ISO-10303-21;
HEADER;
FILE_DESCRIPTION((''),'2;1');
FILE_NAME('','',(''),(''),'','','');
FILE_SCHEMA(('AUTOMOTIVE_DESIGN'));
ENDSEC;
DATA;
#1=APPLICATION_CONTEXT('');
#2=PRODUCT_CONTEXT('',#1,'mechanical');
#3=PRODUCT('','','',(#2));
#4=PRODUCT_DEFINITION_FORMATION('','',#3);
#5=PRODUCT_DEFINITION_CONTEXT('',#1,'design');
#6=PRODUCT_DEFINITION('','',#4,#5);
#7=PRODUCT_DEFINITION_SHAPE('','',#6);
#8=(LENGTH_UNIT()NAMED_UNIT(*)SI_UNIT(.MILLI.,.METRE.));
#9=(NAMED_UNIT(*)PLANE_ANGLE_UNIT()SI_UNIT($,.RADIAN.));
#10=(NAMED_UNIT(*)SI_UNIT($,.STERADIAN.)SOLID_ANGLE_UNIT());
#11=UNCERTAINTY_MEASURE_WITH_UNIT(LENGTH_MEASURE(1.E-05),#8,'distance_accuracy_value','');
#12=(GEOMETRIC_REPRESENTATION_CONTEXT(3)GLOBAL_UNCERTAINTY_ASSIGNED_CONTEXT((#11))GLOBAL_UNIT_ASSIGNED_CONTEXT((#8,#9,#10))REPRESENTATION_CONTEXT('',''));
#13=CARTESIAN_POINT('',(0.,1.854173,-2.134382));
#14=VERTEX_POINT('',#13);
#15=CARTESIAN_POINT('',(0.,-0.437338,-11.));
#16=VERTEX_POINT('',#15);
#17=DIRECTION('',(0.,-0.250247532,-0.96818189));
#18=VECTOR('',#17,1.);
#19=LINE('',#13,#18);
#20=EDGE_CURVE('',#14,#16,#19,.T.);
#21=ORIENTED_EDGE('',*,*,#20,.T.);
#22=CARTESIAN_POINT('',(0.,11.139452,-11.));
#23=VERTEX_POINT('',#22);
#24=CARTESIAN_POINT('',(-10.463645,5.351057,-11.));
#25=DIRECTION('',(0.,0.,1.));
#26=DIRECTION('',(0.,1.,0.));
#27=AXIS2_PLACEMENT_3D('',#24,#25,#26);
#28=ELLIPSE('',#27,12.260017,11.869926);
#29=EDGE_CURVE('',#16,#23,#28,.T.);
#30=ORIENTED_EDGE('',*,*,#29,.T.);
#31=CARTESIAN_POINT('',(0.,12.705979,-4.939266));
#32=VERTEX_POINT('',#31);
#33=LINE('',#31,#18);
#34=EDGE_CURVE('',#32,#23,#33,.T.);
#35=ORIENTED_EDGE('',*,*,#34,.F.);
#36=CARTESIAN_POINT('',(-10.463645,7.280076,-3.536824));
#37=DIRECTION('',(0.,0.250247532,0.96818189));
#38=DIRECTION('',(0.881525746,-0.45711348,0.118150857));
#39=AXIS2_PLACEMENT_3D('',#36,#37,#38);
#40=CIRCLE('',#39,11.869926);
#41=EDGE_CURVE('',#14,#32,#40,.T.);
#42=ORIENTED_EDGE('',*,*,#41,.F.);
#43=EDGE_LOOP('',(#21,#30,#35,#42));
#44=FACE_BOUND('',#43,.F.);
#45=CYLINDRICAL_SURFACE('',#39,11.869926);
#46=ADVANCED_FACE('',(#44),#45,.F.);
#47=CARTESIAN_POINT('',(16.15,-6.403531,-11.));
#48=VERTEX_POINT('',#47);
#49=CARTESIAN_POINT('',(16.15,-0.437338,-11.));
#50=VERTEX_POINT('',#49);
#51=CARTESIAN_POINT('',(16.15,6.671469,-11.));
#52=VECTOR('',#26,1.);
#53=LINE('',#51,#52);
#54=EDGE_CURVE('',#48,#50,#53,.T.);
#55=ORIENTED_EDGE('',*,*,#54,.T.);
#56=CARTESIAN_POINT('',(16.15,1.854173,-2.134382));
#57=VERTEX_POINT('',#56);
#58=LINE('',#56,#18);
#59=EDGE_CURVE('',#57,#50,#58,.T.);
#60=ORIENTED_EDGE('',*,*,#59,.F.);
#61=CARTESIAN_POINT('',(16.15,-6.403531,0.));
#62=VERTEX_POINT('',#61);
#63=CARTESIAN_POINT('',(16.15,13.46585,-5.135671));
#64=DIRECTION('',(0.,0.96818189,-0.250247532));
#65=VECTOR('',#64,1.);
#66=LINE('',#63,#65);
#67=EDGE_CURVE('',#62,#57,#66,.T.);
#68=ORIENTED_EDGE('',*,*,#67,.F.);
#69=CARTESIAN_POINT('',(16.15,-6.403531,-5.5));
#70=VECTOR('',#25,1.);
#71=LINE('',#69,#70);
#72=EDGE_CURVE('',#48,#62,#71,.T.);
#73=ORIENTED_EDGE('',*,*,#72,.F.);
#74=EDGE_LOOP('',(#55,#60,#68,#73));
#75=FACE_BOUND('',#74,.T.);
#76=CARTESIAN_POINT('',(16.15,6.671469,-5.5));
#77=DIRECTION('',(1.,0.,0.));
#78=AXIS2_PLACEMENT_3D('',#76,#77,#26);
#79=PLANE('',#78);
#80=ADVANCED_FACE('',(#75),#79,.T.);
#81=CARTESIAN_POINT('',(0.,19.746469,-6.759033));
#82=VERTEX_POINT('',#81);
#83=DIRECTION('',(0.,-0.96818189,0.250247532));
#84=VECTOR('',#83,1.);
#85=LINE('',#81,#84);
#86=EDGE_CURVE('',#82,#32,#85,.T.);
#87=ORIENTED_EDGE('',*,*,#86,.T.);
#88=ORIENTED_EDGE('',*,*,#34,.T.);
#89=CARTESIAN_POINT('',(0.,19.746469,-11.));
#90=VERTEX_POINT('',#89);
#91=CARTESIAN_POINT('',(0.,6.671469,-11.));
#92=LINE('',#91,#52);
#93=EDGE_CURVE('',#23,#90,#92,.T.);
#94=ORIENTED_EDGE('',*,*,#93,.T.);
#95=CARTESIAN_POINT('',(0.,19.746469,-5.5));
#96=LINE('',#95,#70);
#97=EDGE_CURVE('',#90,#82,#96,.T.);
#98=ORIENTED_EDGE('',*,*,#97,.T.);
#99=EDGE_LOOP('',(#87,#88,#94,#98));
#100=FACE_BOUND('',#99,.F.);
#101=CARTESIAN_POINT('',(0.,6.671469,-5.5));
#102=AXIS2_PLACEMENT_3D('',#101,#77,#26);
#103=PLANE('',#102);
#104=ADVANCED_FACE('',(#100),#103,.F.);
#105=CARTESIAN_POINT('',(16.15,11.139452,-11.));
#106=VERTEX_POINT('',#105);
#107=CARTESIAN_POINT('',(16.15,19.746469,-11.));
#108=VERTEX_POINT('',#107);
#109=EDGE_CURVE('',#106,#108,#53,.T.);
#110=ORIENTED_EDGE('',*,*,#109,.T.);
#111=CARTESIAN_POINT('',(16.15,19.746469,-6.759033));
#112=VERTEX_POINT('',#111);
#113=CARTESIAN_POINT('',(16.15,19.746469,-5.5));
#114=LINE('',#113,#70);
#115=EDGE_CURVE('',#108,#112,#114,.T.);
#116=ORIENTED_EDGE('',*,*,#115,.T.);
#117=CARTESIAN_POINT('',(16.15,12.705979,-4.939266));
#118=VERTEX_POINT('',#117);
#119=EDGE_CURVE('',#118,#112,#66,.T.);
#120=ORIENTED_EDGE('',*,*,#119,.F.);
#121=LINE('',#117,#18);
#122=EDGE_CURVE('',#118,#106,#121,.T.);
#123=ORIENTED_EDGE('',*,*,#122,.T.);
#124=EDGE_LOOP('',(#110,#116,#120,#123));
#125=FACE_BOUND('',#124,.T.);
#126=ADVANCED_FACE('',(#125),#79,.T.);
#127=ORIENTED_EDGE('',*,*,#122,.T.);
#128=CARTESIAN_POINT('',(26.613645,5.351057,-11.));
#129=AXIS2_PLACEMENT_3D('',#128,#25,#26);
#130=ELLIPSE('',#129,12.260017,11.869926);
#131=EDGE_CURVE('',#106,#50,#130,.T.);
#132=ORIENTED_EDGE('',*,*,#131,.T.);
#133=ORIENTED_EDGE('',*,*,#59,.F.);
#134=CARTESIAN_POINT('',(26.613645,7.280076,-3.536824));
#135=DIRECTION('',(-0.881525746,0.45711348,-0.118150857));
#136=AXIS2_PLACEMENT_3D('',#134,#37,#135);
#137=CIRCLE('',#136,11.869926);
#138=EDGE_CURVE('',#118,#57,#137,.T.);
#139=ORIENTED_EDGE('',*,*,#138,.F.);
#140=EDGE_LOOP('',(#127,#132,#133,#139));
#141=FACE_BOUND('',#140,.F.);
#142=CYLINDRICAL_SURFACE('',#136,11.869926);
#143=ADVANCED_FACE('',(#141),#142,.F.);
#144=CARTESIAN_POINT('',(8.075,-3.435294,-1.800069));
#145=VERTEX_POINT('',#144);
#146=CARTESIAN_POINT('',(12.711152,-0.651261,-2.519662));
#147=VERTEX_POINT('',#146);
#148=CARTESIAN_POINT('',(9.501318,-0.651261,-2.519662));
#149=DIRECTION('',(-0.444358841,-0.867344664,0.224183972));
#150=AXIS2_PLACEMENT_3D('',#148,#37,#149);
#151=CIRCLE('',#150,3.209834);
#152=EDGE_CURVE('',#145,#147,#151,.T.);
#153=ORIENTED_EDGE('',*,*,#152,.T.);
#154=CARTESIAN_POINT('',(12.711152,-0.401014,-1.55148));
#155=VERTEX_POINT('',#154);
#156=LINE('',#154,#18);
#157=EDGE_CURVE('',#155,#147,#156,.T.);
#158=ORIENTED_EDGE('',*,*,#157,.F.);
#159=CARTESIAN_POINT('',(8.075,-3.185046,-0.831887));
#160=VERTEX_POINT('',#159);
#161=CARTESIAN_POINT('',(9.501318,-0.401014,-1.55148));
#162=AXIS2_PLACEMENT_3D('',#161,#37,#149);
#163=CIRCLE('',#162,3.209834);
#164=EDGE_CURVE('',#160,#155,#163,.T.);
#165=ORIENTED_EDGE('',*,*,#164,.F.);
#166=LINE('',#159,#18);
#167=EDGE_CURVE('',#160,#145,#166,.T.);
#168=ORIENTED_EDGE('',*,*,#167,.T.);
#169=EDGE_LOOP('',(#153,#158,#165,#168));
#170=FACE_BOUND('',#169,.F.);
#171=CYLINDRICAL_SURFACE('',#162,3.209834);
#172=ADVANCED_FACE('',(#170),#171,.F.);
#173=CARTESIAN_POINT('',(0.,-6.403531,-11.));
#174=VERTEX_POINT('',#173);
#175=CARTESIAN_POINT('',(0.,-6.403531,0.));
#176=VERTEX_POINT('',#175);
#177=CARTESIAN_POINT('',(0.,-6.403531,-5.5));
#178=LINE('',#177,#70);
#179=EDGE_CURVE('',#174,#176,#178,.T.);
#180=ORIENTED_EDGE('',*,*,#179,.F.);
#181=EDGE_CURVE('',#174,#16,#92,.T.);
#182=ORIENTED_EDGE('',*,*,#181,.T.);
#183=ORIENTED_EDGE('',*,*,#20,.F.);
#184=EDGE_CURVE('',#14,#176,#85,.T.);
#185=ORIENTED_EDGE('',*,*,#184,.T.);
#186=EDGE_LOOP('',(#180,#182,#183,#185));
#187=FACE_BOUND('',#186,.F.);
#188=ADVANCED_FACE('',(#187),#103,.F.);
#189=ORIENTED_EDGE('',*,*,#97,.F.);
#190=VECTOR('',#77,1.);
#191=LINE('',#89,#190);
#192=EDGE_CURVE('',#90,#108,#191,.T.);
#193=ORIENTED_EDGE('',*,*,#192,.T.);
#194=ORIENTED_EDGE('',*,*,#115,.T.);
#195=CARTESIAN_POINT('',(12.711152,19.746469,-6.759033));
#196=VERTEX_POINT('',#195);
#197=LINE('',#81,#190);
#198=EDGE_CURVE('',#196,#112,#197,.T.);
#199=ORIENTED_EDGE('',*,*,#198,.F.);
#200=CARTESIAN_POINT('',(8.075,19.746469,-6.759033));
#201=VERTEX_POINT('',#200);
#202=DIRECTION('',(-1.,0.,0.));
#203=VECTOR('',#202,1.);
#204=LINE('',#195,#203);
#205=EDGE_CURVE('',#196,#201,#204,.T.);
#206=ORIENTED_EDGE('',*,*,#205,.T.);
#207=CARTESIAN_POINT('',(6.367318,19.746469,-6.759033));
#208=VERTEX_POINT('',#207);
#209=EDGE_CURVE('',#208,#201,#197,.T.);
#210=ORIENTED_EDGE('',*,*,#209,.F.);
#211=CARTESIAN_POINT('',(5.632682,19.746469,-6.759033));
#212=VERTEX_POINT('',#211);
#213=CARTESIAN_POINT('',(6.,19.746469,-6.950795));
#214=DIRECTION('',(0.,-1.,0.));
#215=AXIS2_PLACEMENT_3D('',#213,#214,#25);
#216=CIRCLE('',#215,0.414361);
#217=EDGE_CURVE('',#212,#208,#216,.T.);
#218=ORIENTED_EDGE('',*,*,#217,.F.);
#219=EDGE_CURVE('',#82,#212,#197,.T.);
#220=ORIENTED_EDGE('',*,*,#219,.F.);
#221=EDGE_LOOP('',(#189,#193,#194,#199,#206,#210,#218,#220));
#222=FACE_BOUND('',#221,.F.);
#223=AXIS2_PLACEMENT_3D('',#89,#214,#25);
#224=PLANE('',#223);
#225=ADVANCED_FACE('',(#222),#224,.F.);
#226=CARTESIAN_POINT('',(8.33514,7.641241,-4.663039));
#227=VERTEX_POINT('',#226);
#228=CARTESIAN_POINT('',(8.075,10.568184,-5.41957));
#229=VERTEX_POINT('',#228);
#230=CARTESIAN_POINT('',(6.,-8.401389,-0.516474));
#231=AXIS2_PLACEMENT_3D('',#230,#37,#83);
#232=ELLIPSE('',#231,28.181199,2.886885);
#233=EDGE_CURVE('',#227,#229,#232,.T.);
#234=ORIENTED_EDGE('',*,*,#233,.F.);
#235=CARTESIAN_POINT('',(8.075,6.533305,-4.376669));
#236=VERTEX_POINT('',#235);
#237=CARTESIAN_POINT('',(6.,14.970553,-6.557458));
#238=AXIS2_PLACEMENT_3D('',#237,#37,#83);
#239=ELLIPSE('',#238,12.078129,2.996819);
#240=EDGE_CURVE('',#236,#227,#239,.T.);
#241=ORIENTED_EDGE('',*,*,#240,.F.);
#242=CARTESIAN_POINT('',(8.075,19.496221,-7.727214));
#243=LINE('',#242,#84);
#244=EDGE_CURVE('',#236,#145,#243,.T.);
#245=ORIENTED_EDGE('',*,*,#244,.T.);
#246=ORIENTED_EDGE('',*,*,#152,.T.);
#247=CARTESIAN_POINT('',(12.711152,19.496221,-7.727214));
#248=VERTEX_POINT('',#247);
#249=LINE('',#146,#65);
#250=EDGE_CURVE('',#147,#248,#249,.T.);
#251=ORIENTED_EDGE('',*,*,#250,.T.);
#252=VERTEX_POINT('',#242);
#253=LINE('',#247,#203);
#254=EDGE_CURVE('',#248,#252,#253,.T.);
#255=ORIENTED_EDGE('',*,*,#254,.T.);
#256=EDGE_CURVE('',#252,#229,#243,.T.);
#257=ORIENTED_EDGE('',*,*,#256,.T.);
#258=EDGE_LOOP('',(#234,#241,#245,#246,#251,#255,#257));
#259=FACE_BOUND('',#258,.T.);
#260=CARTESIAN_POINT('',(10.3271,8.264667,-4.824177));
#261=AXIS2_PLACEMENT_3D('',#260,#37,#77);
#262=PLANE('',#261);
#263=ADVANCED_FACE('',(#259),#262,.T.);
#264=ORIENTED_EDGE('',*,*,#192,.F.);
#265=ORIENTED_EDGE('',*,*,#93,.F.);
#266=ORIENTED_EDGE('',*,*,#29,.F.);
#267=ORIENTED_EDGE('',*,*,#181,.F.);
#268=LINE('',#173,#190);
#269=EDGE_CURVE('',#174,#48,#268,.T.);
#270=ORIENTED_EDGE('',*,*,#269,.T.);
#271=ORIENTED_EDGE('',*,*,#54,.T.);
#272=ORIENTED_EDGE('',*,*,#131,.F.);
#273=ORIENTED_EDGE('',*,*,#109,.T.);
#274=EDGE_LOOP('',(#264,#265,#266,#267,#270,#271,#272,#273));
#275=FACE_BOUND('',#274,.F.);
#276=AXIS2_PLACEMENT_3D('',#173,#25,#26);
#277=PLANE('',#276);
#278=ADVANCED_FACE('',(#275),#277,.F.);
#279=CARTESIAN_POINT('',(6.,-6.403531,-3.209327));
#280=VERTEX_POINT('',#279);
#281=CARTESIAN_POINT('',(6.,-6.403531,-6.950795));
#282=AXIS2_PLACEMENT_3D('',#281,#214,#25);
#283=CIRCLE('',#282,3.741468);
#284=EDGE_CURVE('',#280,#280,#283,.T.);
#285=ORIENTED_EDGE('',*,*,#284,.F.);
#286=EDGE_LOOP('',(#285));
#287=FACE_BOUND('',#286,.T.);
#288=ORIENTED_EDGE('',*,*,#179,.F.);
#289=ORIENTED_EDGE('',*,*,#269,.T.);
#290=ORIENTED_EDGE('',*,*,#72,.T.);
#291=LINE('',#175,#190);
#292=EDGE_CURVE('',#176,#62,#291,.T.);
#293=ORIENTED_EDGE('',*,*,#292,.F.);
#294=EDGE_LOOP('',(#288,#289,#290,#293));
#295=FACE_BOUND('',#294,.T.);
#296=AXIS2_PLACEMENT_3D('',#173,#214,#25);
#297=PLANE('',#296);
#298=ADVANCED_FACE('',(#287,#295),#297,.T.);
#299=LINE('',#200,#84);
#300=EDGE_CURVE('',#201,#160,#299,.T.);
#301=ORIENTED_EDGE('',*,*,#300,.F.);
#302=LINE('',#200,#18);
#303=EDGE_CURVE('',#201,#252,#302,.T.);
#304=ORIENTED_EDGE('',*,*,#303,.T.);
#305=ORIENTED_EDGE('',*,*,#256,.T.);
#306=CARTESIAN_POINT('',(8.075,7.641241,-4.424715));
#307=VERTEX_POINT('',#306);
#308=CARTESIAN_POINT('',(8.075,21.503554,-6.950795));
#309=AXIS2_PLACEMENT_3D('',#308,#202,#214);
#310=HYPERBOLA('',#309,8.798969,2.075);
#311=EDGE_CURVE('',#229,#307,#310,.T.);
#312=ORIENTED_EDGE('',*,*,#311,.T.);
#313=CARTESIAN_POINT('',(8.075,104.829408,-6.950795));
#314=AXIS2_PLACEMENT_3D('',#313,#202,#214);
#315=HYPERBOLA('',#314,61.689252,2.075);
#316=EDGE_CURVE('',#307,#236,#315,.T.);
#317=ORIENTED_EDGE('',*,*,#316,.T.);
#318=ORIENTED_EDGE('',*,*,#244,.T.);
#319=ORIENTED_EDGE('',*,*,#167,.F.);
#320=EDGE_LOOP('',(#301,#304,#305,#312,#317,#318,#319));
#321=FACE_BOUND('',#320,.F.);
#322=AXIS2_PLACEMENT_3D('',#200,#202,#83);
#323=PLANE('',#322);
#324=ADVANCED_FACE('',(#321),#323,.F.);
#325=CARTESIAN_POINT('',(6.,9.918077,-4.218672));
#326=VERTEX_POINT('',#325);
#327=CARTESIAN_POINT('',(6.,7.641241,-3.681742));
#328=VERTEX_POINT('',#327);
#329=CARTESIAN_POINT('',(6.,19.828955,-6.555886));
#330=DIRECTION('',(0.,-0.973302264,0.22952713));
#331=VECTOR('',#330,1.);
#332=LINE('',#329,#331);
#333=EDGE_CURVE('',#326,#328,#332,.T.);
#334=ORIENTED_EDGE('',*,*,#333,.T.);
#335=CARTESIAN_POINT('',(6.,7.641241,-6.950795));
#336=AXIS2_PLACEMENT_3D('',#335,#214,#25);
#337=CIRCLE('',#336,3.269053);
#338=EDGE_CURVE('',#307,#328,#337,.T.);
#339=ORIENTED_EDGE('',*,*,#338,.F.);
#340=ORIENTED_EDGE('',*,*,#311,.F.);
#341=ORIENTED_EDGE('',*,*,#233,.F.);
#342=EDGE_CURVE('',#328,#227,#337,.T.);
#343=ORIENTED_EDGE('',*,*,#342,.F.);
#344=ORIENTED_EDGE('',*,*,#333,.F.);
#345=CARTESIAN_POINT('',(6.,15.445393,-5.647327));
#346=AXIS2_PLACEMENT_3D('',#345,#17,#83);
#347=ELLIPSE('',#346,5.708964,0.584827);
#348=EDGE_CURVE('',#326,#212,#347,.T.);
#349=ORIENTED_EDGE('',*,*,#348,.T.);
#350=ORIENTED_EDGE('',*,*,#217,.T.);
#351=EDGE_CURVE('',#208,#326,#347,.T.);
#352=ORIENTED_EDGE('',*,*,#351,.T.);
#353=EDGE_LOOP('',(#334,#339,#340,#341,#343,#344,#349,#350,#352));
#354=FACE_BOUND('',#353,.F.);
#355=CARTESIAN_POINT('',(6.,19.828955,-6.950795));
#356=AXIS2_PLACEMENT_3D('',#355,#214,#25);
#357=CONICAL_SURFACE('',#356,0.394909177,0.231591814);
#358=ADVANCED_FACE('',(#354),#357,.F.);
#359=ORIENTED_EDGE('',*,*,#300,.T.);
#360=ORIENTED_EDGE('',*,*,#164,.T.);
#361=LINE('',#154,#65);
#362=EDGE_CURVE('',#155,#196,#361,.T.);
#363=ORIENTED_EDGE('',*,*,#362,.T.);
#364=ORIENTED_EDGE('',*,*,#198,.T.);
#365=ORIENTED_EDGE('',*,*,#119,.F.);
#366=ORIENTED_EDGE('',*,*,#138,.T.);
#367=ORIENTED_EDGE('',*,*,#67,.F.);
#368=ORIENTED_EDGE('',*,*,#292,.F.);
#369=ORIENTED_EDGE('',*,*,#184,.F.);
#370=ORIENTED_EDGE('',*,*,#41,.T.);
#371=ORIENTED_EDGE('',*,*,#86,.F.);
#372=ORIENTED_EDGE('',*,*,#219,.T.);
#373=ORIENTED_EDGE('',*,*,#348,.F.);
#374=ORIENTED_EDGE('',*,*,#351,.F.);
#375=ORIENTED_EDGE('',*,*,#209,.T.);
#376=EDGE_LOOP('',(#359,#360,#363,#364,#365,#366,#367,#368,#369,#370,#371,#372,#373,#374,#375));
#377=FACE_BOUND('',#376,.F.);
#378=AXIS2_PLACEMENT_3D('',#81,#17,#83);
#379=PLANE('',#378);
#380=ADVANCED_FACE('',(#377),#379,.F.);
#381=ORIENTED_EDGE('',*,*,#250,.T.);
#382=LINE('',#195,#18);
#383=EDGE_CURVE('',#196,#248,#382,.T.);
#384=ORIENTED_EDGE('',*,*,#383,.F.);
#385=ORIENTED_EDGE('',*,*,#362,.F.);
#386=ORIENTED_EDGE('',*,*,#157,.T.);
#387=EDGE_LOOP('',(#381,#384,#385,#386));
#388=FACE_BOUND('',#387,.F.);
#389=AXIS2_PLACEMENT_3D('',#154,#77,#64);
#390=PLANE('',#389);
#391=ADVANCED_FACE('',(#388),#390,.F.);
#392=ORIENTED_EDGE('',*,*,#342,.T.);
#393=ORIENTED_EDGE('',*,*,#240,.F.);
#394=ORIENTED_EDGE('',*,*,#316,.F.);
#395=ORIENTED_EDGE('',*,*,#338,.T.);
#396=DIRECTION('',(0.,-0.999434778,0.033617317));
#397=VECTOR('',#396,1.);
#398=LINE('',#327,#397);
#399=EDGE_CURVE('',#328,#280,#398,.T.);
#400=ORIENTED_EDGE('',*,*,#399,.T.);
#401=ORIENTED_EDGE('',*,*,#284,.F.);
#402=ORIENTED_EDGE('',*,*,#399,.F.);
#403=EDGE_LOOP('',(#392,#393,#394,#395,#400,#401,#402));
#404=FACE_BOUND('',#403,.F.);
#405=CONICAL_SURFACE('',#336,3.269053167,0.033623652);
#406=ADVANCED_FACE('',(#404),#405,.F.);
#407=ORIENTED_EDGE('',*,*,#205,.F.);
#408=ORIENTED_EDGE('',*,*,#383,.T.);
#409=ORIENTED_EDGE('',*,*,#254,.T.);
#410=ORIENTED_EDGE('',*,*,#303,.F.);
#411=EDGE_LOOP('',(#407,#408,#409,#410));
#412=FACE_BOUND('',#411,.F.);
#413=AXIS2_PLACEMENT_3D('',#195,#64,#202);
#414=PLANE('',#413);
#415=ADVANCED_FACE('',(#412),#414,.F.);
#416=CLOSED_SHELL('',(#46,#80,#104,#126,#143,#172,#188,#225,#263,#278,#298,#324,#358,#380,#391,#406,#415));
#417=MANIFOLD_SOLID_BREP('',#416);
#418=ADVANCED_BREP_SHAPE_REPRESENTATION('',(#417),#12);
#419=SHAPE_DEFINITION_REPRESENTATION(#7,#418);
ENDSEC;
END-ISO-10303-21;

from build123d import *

# Parameters (mm, degrees)
F0_W      = 26.15
F0_H      = 11
F1_DEPTH  = 16.15
F3_DEPTH  = 25
F5_DEPTH  = 1
F13_DEPTH = 10


# Not quite as in the source:
# - the program builds the solid bodies; features that only make, move or delete a surface that nothing else refers to are left out


with BuildPart() as f1:
    # F0 (on Right) → F1 (new body)
    with BuildSketch(Plane.YZ):
        with Locations((6.6714687273, -5.5)):
            Rectangle(F0_W, F0_H)
    extrude(amount=F1_DEPTH)

    # F2 (on face) → F3 (cut)
    with BuildSketch(Plane(origin=(0, 0, 0), x_dir=(0, -1, 0), z_dir=(-1, 0, 0))):
        Polygon((-19.7464687273, -6.7590326071), (6.4035312727, 0), (-19.7464687273, 0), align=None)
    extrude(amount=-F3_DEPTH, mode=Mode.SUBTRACT)

    # F4 (on face) → F5 (cut)
    with BuildSketch(Plane(origin=(0, -0.4010136369, -1.5514803987), x_dir=(1, 0, 0), z_dir=(0, 0.2502475322, 0.9681818903))):
        with BuildLine():
            Line((12.7111524343, 0), (12.7111524343, 20.8096046483))
            Line((12.7111524343, 20.8096046483), (8.075, 20.8096046483))
            Line((8.075, 20.8096046483), (8.075, -2.8755263988))
            ThreePointArc((8.075, -2.8755263988), (11.1931797197, -2.7277537217), (12.7111524343, 0))
        make_face()
    extrude(amount=-F5_DEPTH, mode=Mode.SUBTRACT)

    # F9 (on offset) → F10 (revolve, cut)
    with BuildSketch(Plane.YZ.offset(6)):
        Polygon((7.6412414201, -3.6817420176), (-6.7182444036, -3.1987416248), (-6.7182444036, -6.9507951848), (7.6412414201, -6.9507951848), align=None)
        Polygon((19.8289547116, -6.5558860078), (7.6412414201, -3.6817420176), (7.6412414201, -6.9507951848), (19.8289547116, -6.9507951848), align=None)
    revolve(axis=Axis((6, 0.4614985082, -6.9507951848), (0, -1, 0)), mode=Mode.SUBTRACT)

    # F9 (on offset) → F11 (revolve, cut)
    with BuildSketch(Plane.YZ.offset(6)):
        Polygon((19.8289547116, -6.5558860078), (7.6412414201, -3.6817420176), (7.6412414201, -6.9507951848), (19.8289547116, -6.9507951848), align=None)
    revolve(axis=Axis((6, 13.7350980658, -6.9507951848), (0, 1, 0)), mode=Mode.SUBTRACT)

    # F12 (on face) → F13 (cut)
    with BuildSketch(Plane(origin=(0, -0.4010136369, -1.5514803987), x_dir=(1, 0, 0), z_dir=(0, 0.2502475322, 0.9681818903))):
        with BuildLine():
            Line((0, 13.5377381568), (0, 2.3293004092))
            ThreePointArc((0, 2.3293004092), (1.4062806348, 7.933519283), (0, 13.5377381568))
        make_face()
        with BuildLine():
            Line((16.15, 2.3293004092), (16.15, 13.5377381568))
            ThreePointArc((16.15, 13.5377381568), (14.7437193652, 7.933519283), (16.15, 2.3293004092))
        make_face()
    extrude(amount=-F13_DEPTH, mode=Mode.SUBTRACT)


solid = f1.part
